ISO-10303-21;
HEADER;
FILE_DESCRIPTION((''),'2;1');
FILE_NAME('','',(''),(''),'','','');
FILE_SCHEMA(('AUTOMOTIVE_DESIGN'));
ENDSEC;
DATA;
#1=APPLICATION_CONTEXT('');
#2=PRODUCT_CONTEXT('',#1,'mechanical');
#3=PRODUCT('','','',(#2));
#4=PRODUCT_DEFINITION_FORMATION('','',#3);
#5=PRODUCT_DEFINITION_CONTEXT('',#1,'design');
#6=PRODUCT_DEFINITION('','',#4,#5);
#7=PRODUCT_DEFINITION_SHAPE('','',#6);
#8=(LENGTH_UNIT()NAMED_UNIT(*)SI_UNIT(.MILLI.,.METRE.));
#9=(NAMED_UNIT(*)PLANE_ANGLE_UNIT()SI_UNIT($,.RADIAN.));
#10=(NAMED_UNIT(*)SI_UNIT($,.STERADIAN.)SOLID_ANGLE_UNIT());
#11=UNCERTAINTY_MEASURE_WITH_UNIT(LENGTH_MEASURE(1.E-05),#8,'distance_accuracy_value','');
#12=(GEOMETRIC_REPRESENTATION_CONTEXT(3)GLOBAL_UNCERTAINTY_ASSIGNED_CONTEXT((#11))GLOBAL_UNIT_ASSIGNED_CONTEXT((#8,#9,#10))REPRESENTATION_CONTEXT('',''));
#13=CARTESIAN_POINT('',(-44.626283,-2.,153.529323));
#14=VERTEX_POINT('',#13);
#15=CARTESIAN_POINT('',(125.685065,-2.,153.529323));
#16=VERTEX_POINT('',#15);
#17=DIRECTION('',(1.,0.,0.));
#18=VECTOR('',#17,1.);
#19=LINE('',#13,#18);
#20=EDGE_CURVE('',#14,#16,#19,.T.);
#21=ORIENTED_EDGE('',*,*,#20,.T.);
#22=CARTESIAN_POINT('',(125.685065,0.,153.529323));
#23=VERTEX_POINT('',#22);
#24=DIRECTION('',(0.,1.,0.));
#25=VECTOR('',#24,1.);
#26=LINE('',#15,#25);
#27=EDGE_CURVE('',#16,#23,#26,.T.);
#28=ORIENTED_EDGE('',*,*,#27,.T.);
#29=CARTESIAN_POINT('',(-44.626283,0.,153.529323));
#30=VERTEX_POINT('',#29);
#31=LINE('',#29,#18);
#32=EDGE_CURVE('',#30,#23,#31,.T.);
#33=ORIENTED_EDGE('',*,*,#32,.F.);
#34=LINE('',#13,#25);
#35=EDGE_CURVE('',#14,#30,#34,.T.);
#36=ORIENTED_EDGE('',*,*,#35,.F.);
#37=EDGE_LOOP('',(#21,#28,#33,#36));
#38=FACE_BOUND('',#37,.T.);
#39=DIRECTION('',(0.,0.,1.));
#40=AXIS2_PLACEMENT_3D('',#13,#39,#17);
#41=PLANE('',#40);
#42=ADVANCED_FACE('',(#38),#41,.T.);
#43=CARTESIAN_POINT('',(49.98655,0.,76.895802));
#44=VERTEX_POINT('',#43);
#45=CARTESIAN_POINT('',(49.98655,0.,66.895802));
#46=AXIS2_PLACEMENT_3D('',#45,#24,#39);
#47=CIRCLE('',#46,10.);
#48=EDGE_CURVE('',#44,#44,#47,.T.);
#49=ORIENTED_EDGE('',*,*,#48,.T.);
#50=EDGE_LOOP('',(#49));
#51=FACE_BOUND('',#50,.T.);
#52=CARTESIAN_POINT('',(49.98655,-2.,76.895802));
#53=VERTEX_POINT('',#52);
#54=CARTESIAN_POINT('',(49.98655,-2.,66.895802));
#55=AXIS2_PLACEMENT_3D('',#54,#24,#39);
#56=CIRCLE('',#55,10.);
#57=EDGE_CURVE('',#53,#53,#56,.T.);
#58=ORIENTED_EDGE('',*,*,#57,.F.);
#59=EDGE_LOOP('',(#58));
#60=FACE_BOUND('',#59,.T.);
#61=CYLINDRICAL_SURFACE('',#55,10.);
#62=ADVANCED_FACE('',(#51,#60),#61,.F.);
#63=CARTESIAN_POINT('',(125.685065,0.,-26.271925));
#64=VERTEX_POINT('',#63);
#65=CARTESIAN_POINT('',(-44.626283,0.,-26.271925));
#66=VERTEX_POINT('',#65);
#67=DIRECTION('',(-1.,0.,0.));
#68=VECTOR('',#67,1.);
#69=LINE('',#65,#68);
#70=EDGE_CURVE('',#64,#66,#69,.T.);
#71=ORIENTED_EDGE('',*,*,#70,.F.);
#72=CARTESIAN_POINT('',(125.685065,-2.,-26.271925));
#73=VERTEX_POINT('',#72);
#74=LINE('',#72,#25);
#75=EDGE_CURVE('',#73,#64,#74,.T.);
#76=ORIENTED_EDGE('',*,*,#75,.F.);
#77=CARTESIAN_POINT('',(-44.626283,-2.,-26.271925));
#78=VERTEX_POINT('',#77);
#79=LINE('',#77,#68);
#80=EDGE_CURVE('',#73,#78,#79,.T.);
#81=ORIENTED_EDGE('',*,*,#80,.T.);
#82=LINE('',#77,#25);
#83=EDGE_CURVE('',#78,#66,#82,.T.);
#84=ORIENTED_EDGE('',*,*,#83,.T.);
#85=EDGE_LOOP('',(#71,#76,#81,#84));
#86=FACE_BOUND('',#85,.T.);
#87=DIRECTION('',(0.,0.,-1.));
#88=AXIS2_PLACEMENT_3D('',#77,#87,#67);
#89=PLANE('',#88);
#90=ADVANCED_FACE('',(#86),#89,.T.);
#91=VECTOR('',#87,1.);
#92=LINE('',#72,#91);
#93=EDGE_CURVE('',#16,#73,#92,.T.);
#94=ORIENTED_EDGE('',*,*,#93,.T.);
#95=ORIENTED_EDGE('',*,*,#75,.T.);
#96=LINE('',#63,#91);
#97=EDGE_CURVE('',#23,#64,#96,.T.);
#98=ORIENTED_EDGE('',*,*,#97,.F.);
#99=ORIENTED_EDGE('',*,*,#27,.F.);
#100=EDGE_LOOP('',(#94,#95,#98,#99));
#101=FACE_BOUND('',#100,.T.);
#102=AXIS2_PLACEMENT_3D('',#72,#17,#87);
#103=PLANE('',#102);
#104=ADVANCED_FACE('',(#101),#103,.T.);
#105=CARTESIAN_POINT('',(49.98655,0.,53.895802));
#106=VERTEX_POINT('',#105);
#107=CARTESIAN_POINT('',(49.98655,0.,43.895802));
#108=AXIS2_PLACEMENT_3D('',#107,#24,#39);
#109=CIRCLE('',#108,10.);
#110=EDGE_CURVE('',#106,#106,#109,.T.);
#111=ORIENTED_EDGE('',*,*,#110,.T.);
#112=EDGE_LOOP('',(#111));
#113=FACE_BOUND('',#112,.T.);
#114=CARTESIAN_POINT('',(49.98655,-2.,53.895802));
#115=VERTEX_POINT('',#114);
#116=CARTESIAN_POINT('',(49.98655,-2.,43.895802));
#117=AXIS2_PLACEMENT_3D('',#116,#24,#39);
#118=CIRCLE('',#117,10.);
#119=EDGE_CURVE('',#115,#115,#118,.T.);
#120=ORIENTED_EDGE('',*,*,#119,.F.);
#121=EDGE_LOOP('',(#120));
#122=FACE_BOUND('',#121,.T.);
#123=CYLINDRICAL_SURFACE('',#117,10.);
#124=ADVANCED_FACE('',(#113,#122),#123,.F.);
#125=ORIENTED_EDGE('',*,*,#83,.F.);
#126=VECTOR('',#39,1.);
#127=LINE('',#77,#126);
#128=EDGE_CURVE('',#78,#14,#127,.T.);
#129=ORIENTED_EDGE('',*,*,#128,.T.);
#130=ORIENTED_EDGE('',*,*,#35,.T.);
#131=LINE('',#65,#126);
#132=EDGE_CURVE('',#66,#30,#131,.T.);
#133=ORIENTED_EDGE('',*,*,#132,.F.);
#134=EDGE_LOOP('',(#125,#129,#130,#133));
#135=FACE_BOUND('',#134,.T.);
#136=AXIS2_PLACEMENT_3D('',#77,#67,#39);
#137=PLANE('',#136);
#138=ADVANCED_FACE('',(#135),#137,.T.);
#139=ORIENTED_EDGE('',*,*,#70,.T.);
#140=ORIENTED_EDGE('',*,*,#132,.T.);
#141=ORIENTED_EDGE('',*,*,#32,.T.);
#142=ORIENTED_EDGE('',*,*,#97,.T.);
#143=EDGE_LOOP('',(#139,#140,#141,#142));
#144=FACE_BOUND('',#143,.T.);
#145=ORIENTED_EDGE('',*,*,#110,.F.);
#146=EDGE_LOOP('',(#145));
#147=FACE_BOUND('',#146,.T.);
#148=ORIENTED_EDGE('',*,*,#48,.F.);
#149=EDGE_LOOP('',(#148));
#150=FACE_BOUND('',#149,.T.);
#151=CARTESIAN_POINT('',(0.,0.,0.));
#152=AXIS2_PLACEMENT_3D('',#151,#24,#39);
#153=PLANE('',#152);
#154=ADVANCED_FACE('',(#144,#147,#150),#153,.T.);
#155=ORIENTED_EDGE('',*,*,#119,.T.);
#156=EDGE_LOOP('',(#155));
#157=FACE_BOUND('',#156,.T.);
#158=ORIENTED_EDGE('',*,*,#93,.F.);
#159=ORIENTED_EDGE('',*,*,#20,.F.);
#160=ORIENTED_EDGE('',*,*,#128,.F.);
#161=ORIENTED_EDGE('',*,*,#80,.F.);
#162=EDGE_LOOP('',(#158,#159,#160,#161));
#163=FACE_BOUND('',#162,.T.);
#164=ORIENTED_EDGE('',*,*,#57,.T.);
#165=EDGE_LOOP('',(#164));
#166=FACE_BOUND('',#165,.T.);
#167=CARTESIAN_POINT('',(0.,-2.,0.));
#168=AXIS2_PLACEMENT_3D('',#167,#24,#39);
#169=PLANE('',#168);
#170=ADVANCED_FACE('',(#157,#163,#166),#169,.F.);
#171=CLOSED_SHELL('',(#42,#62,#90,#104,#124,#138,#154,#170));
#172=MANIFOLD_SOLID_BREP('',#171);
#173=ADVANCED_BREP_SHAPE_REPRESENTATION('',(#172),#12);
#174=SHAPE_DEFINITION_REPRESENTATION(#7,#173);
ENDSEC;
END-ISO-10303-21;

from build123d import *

# Parameters (mm, degrees)
SKETCH1_W          = 170.311348289
SKETCH1_H          = 179.801248385
BASE_FLANGE1_DEPTH = 2
SKETCH2_R          = 10
CUT_EXTRUDE1_DEPTH = 10


# Sheet-metal steps are written as plain solids
with BuildPart() as part:
    # Sketch1 → Base-Flange1 (new body)
    with BuildSketch(Plane(origin=(0, 0, 0), x_dir=(1, 0, 0), z_dir=(0, 1, 0))):
        with Locations((40.529390711, -63.628699267)):
            Rectangle(SKETCH1_W, SKETCH1_H)
    extrude(amount=-BASE_FLANGE1_DEPTH)

    # Sketch2 → Cut-Extrude1 (cut)
    with BuildSketch(Plane(origin=(0, 0, 0), x_dir=(1, 0, 0), z_dir=(0, 1, 0))):
        with Locations(Location((49.986549923, -43.89580223, 0), (0, 0, 270))):
            Circle(SKETCH2_R)
        with Locations(Location((49.986549923, -66.89580223, 0), (0, 0, 270))):
            Circle(SKETCH2_R)
    extrude(amount=-CUT_EXTRUDE1_DEPTH, mode=Mode.SUBTRACT)


solid = part.part
